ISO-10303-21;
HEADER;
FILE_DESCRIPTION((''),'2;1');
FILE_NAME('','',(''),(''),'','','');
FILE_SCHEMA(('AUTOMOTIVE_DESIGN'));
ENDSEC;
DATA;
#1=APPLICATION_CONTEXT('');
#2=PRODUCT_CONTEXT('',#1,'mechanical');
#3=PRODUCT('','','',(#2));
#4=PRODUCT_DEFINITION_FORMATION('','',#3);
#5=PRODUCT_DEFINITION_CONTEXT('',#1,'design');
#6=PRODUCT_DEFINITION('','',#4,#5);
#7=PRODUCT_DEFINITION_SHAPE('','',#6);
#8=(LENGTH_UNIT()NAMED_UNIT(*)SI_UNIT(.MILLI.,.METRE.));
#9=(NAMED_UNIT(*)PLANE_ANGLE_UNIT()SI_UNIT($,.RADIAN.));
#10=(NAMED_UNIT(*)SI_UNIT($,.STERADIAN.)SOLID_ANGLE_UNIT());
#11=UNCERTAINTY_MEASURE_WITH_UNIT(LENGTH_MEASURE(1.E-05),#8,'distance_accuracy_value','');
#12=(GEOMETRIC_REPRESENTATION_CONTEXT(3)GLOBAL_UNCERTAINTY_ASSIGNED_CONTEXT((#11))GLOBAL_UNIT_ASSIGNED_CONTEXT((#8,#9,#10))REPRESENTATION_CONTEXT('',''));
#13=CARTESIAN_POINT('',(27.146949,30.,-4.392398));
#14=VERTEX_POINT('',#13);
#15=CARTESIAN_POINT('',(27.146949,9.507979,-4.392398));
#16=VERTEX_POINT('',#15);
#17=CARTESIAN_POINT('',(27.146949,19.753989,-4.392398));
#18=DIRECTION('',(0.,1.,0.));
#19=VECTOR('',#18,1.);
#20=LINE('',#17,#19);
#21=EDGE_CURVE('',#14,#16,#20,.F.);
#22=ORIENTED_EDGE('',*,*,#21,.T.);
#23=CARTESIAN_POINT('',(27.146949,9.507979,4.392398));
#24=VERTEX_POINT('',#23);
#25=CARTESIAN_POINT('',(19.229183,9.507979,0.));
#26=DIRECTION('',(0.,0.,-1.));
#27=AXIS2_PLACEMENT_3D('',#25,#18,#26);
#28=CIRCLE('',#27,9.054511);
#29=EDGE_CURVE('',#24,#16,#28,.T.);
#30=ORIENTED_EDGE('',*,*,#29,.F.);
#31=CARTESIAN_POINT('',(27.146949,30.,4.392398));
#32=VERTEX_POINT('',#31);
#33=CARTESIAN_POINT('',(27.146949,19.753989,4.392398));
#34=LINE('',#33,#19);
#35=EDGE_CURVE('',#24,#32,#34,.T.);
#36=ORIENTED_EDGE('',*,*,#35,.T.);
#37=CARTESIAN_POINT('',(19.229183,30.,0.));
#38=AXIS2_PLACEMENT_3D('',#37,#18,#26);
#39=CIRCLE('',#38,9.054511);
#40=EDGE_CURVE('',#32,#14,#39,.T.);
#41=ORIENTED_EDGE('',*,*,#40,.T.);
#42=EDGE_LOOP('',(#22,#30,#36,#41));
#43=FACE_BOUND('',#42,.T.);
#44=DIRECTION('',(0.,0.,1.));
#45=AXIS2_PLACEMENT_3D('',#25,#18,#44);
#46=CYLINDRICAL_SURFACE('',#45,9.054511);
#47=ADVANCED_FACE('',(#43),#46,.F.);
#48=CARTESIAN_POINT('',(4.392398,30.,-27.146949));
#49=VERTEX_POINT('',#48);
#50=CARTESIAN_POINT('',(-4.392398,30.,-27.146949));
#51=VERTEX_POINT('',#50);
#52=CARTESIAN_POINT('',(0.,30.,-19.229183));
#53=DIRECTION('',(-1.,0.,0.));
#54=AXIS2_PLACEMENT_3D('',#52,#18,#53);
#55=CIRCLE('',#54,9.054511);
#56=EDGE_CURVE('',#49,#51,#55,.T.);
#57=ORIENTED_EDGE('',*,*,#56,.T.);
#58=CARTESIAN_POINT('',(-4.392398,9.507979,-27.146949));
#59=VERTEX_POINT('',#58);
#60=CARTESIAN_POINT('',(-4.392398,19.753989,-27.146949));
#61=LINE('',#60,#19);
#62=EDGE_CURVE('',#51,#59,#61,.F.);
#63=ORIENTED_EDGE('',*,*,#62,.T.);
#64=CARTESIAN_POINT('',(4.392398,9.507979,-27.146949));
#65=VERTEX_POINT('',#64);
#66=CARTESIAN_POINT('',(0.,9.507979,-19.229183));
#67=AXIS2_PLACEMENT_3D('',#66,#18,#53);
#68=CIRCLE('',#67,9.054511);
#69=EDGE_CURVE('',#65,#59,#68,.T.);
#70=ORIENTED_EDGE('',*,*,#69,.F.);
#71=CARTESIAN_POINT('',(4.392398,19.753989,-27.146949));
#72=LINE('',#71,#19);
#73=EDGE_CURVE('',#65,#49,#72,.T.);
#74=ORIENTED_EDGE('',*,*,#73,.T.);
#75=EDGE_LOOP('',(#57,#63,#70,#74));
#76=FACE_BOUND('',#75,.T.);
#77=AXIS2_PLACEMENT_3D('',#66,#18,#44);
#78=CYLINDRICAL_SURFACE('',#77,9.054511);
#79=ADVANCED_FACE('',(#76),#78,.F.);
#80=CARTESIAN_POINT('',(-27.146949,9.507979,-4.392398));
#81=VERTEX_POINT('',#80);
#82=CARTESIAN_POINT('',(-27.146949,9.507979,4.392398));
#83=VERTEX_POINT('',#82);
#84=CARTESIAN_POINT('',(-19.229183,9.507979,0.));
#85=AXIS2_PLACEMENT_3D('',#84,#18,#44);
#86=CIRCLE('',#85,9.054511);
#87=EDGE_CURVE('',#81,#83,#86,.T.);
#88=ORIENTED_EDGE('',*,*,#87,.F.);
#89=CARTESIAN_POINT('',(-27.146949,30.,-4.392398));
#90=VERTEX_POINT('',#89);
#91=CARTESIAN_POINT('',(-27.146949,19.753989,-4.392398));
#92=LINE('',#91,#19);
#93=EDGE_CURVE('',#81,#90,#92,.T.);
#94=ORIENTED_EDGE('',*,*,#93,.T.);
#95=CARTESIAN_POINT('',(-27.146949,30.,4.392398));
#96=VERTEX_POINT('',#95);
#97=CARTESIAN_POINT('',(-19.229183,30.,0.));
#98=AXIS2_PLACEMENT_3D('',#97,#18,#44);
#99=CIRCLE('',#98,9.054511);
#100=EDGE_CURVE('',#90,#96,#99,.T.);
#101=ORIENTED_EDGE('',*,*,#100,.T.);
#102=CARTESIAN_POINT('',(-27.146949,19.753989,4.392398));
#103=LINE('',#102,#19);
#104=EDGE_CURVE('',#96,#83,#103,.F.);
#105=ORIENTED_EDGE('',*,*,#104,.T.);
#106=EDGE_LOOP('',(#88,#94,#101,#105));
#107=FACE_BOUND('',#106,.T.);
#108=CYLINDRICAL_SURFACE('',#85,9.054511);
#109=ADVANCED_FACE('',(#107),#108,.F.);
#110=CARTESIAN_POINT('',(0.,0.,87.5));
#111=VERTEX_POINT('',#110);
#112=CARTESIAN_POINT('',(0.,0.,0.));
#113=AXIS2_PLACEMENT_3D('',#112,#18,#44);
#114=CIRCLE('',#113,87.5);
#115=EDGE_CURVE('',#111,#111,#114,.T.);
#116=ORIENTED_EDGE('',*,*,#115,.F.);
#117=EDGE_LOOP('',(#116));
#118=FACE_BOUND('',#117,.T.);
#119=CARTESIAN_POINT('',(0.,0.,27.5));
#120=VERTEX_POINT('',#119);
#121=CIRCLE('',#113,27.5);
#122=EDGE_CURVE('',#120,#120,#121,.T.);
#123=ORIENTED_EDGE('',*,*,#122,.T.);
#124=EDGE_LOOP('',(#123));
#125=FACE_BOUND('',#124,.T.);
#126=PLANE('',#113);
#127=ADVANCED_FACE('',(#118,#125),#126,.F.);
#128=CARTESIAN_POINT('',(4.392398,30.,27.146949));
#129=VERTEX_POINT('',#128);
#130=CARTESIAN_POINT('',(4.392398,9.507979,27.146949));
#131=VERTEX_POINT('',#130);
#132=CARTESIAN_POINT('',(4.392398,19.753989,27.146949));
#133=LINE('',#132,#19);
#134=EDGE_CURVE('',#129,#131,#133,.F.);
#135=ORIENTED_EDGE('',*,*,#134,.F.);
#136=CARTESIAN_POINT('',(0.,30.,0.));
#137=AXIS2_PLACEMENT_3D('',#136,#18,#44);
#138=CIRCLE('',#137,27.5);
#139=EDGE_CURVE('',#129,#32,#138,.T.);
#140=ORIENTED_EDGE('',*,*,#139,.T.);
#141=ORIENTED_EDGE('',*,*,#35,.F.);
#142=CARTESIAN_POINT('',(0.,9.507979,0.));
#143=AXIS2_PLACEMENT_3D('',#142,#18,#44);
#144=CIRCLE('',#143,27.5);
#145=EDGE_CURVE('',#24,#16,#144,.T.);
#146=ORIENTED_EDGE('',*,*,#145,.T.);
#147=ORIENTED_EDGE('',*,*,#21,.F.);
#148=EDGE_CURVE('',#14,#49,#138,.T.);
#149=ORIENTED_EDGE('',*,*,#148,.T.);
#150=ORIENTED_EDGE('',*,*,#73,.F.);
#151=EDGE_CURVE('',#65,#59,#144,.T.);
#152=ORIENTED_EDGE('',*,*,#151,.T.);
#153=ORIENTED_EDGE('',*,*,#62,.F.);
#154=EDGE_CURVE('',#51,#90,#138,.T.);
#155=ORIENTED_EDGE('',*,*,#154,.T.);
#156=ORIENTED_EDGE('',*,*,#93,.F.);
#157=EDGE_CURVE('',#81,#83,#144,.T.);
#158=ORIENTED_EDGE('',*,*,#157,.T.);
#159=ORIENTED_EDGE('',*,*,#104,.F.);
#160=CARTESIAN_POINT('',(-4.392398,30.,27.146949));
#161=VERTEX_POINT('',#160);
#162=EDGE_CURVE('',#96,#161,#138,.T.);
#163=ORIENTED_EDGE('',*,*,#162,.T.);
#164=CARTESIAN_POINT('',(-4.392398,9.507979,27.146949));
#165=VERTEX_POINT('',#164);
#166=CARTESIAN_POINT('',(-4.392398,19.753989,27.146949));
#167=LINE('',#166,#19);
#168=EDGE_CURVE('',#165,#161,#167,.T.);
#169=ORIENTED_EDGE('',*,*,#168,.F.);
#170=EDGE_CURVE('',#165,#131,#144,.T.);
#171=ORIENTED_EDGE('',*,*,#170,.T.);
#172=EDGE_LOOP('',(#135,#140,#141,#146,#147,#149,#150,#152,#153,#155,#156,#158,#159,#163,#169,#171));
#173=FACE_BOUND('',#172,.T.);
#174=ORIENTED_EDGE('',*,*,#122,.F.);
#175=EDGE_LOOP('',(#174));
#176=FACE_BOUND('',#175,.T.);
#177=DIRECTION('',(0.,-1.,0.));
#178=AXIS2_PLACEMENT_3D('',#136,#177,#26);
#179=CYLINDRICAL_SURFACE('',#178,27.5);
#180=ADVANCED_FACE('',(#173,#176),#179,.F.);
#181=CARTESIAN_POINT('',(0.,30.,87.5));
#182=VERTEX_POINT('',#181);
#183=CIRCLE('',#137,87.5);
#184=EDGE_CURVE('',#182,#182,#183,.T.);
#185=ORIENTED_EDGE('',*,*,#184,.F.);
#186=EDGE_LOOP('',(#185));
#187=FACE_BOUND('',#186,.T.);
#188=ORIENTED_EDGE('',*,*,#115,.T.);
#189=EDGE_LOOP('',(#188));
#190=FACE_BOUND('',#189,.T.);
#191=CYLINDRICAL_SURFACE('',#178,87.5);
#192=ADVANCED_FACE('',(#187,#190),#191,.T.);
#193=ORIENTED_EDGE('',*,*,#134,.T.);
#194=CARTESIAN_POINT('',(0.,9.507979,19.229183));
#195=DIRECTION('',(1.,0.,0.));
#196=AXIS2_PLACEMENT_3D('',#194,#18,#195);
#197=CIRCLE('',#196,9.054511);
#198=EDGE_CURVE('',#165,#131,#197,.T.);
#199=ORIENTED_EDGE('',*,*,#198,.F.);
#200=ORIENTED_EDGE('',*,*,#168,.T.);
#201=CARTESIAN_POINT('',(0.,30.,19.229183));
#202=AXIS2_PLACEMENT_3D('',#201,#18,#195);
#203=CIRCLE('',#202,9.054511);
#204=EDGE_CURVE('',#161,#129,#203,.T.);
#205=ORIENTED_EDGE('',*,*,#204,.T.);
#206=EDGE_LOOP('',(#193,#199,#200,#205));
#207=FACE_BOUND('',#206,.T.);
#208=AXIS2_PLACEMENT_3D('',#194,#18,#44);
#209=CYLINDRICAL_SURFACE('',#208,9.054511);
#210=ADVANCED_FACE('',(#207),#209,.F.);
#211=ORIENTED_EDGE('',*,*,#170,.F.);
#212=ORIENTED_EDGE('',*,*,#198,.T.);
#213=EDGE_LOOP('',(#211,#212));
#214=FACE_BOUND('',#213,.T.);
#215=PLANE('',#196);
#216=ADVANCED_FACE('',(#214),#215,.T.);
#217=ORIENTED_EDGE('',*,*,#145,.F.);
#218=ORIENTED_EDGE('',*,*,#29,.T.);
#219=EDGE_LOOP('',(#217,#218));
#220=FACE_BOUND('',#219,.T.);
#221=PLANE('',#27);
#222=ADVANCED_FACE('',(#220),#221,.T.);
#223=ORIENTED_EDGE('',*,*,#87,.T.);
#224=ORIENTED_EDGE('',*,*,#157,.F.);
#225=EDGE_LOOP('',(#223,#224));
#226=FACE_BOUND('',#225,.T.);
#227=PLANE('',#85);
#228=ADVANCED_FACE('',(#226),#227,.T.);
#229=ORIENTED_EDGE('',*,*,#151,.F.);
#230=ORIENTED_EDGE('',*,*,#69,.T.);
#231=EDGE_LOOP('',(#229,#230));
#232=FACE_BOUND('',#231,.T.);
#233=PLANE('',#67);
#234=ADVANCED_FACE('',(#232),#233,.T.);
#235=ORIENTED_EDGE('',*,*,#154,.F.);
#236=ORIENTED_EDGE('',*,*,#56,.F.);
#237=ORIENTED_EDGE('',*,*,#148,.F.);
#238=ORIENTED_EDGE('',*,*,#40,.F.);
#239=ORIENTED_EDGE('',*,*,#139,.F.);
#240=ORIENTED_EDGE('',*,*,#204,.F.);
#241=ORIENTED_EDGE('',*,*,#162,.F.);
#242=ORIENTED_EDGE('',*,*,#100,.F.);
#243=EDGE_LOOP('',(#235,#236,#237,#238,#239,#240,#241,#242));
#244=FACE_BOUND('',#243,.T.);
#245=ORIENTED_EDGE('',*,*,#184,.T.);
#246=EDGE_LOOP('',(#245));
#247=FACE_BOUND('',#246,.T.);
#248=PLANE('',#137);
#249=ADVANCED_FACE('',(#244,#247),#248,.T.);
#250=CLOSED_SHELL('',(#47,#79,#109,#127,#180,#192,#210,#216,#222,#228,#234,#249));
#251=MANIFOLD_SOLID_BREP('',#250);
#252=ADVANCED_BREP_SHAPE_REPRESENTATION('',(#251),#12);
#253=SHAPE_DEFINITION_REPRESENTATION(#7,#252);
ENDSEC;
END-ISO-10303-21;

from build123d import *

# Parameters (mm, degrees)
SKETCH1_R           = 87.5
BOSS_EXTRUDE1_DEPTH = 30
SKETCH2_R           = 27.5
CUT_EXTRUDE1_DEPTH  = 128.328315782
SKETCH3_R           = 9.054511307
CUT_EXTRUDE2_DEPTH  = 20.492021181
CIRPATTERN1_COUNT   = 4


with BuildPart() as part:
    # Sketch1 → Boss-Extrude1 (new body)
    with BuildSketch(Plane(origin=(0, 0, 0), x_dir=(1, 0, 0), z_dir=(0, 1, 0))):
        Circle(SKETCH1_R)
    extrude(amount=BOSS_EXTRUDE1_DEPTH)

    # Sketch2 → Cut-Extrude1 (cut, through all)
    with BuildSketch(Plane(origin=(0, 0, 0), x_dir=(1, 0, 0), z_dir=(0, 1, 0))):
        Circle(SKETCH2_R)
    extrude(amount=CUT_EXTRUDE1_DEPTH, mode=Mode.SUBTRACT)

    # Sketch3 → Cut-Extrude2 (cut)
    with BuildSketch(Plane(origin=(0, 30, 0), x_dir=(1, 0, 0), z_dir=(0, 1, 0))):
        with Locations((-19.229183332, 0)):
            Circle(SKETCH3_R)
    cut_extrude2 = extrude(amount=-CUT_EXTRUDE2_DEPTH, mode=Mode.SUBTRACT)

    # CirPattern1: Cut-Extrude2 ×4 about axis
    cirpattern1_axis = Axis((0, 0, 0), (0, 1, 0))
    for i in range(1, CIRPATTERN1_COUNT):
        add(cut_extrude2.rotate(cirpattern1_axis, i * 360 / CIRPATTERN1_COUNT), mode=Mode.SUBTRACT)


solid = part.part
